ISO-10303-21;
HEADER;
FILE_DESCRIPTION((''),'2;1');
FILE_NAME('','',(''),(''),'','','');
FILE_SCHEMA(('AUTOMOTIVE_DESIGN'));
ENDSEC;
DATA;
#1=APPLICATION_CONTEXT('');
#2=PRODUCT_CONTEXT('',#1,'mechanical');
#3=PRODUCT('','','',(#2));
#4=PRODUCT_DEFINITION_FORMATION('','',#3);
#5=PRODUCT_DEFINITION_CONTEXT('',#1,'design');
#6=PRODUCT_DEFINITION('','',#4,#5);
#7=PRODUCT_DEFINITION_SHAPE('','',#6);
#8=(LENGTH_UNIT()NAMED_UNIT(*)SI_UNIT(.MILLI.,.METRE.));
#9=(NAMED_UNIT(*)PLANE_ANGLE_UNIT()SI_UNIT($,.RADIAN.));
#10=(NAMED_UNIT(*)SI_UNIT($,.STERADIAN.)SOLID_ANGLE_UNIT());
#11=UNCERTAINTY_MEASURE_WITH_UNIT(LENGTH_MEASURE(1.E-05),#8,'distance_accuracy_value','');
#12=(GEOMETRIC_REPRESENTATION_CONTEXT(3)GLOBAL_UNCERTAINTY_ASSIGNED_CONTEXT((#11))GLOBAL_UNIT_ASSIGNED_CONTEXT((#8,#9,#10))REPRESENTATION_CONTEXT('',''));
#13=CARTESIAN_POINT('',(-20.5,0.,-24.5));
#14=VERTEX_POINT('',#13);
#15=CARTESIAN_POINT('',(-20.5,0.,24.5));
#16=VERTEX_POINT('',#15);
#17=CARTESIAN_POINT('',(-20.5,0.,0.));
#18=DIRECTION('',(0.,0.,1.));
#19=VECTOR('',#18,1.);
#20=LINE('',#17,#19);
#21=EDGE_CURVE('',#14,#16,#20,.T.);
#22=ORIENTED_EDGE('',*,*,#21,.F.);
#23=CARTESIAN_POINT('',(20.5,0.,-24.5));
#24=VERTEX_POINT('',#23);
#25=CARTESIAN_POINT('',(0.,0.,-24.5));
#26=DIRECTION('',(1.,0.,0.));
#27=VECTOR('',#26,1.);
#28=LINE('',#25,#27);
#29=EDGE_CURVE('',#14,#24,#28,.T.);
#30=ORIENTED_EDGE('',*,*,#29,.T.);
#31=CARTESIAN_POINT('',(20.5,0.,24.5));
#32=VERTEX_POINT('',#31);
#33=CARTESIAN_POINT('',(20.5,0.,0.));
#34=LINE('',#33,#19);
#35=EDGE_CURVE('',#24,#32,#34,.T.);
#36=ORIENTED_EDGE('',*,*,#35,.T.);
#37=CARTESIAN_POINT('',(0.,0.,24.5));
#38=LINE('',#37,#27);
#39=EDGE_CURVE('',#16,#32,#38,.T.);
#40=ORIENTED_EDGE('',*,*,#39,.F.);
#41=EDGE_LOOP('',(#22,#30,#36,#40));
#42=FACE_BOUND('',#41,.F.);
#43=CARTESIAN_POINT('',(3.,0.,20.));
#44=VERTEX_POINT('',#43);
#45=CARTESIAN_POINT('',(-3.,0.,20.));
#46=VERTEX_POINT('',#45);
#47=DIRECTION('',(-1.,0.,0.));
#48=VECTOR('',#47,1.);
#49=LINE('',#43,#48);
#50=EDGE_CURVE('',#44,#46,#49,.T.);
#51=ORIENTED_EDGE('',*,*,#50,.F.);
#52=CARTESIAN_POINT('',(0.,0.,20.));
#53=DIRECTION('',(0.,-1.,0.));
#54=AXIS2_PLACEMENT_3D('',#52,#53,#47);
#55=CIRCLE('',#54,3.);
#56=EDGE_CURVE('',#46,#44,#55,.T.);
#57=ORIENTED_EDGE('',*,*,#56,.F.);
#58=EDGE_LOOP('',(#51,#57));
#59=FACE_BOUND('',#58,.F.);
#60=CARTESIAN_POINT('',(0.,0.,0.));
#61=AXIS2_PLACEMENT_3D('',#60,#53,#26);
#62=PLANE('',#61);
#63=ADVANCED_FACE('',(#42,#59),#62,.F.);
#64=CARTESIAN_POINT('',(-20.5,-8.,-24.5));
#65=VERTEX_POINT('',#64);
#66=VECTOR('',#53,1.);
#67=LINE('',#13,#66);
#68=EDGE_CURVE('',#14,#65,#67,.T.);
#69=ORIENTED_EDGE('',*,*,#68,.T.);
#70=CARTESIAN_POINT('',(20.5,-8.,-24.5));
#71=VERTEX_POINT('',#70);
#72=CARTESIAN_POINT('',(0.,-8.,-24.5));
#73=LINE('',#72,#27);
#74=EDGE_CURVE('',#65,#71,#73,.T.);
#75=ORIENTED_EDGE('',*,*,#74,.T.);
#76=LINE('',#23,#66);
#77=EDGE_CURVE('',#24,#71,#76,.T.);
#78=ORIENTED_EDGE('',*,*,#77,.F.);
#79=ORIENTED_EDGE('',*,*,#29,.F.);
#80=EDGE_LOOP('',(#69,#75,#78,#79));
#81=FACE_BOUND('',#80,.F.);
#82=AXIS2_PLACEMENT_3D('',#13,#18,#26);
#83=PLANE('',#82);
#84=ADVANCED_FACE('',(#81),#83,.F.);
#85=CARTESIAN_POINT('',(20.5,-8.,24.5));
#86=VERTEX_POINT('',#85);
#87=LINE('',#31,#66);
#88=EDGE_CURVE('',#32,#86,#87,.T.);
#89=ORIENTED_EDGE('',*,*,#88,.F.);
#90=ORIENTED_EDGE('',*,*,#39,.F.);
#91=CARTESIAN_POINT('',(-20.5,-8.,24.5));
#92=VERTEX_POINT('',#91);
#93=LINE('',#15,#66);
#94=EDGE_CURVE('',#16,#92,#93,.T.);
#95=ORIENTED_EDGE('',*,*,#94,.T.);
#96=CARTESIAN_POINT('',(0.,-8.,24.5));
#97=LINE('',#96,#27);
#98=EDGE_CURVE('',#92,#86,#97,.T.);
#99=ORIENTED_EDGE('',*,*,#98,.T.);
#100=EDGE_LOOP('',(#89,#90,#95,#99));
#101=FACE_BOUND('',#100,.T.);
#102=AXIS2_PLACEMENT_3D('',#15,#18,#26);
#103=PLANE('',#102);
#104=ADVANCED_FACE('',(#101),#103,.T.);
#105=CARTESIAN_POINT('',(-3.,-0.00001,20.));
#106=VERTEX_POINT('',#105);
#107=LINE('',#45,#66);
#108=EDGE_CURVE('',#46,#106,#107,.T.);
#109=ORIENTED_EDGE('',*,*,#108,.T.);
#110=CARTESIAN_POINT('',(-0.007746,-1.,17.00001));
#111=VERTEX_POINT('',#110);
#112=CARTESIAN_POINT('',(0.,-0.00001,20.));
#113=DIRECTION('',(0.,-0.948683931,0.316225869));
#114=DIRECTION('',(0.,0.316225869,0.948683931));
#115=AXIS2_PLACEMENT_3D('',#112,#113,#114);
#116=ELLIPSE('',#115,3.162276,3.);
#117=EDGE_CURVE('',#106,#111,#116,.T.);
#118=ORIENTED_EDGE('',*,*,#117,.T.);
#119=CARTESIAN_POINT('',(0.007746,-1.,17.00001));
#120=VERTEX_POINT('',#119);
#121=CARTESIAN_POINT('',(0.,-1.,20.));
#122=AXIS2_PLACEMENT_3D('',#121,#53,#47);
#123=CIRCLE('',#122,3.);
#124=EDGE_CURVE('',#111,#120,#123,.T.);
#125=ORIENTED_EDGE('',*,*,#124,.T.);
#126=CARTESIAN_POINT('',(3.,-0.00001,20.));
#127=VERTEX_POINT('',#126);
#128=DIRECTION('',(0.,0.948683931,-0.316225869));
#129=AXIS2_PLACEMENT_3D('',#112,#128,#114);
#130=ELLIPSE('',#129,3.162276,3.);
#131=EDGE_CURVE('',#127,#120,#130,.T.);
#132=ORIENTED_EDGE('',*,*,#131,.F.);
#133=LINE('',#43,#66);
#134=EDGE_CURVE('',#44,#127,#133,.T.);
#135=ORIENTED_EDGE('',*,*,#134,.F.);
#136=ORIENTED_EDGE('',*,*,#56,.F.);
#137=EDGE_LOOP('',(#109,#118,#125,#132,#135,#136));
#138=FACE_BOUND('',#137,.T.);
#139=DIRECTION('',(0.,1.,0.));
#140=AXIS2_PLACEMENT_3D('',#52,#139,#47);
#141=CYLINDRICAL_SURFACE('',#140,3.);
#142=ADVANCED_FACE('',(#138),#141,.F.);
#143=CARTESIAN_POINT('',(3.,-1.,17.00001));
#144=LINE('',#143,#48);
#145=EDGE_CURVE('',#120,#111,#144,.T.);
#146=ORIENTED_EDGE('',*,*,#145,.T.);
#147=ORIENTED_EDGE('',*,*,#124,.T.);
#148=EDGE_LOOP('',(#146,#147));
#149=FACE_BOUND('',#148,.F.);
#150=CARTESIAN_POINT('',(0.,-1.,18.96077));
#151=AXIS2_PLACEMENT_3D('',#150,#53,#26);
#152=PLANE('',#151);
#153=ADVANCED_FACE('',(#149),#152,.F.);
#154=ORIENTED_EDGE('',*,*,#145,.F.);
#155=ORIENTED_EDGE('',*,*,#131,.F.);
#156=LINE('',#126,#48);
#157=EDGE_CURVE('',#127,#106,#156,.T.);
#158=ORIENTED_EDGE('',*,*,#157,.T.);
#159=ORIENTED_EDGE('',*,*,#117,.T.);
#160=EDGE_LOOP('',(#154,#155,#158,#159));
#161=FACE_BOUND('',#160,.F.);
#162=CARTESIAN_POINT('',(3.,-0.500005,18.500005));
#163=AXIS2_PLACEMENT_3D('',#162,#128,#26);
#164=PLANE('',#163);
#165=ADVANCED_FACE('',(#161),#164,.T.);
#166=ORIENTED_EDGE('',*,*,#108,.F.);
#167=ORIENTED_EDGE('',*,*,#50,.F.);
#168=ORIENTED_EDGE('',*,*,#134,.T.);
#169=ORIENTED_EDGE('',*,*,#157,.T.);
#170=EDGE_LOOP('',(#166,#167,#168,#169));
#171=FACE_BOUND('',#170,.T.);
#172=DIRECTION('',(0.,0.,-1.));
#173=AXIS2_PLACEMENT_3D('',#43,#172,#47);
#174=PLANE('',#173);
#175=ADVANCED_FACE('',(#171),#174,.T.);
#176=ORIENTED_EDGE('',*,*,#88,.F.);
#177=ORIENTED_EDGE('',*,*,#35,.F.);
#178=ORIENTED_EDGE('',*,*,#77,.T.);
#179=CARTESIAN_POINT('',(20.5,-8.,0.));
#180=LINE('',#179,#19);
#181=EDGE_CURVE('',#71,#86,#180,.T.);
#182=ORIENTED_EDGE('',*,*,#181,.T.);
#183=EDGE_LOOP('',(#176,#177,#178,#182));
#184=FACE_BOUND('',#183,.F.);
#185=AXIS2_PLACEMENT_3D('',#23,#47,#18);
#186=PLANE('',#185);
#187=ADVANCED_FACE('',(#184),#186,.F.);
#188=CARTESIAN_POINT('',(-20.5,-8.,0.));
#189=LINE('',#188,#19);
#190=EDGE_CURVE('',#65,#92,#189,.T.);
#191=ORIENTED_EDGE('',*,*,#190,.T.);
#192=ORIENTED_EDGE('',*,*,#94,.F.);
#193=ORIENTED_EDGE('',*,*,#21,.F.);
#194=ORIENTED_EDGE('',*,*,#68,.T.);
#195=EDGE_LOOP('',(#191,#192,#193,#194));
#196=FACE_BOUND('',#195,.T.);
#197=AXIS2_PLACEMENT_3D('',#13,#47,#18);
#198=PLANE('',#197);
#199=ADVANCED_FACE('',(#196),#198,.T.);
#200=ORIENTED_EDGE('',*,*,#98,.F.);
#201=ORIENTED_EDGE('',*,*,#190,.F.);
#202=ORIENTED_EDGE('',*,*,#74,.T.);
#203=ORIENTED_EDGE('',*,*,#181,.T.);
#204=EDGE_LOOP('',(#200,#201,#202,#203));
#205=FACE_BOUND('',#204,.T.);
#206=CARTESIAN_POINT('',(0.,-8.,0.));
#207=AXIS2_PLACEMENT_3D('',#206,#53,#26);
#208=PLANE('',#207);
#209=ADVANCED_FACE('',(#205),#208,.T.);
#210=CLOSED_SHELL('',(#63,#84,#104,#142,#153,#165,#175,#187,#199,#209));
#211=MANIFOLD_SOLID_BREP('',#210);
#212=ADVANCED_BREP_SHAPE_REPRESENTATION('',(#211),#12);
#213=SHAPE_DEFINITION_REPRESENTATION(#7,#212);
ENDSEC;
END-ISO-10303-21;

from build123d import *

# Parameters (mm, degrees)
F0_W     = 41
F0_H     = 49
F1_DEPTH = 8
F3_DEPTH = 1
F4_SIZE2 = 2.99999
F4_SIZE  = 0.99999


# Not quite as in the source:
# - a fillet or chamfer is up to 0.001 mm smaller than in the source, because OpenCascade refuses the exact size


with BuildPart() as f1:
    # F0 (on Front) → F1 (new body)
    with BuildSketch(Plane.XZ):
        Rectangle(F0_W, F0_H)
    extrude(amount=F1_DEPTH)

    # F2 (on Front) → F3 (cut)
    with BuildSketch(Plane.XZ):
        with BuildLine():
            Line((3, 20), (-3, 20))
            ThreePointArc((-3, 20), (0, 17), (3, 20))
        make_face()
    extrude(amount=F3_DEPTH, mode=Mode.SUBTRACT)

    # F4 (size 1 and 3 in the source; OpenCascade refuses exactly that, so slightly less here)
    f4_edges = [f1.edges().sort_by_distance(p)[0] for p in [
        (0, -1, 20),
    ]]
    chamfer(f4_edges, length=F4_SIZE, length2=F4_SIZE2)


solid = f1.part
